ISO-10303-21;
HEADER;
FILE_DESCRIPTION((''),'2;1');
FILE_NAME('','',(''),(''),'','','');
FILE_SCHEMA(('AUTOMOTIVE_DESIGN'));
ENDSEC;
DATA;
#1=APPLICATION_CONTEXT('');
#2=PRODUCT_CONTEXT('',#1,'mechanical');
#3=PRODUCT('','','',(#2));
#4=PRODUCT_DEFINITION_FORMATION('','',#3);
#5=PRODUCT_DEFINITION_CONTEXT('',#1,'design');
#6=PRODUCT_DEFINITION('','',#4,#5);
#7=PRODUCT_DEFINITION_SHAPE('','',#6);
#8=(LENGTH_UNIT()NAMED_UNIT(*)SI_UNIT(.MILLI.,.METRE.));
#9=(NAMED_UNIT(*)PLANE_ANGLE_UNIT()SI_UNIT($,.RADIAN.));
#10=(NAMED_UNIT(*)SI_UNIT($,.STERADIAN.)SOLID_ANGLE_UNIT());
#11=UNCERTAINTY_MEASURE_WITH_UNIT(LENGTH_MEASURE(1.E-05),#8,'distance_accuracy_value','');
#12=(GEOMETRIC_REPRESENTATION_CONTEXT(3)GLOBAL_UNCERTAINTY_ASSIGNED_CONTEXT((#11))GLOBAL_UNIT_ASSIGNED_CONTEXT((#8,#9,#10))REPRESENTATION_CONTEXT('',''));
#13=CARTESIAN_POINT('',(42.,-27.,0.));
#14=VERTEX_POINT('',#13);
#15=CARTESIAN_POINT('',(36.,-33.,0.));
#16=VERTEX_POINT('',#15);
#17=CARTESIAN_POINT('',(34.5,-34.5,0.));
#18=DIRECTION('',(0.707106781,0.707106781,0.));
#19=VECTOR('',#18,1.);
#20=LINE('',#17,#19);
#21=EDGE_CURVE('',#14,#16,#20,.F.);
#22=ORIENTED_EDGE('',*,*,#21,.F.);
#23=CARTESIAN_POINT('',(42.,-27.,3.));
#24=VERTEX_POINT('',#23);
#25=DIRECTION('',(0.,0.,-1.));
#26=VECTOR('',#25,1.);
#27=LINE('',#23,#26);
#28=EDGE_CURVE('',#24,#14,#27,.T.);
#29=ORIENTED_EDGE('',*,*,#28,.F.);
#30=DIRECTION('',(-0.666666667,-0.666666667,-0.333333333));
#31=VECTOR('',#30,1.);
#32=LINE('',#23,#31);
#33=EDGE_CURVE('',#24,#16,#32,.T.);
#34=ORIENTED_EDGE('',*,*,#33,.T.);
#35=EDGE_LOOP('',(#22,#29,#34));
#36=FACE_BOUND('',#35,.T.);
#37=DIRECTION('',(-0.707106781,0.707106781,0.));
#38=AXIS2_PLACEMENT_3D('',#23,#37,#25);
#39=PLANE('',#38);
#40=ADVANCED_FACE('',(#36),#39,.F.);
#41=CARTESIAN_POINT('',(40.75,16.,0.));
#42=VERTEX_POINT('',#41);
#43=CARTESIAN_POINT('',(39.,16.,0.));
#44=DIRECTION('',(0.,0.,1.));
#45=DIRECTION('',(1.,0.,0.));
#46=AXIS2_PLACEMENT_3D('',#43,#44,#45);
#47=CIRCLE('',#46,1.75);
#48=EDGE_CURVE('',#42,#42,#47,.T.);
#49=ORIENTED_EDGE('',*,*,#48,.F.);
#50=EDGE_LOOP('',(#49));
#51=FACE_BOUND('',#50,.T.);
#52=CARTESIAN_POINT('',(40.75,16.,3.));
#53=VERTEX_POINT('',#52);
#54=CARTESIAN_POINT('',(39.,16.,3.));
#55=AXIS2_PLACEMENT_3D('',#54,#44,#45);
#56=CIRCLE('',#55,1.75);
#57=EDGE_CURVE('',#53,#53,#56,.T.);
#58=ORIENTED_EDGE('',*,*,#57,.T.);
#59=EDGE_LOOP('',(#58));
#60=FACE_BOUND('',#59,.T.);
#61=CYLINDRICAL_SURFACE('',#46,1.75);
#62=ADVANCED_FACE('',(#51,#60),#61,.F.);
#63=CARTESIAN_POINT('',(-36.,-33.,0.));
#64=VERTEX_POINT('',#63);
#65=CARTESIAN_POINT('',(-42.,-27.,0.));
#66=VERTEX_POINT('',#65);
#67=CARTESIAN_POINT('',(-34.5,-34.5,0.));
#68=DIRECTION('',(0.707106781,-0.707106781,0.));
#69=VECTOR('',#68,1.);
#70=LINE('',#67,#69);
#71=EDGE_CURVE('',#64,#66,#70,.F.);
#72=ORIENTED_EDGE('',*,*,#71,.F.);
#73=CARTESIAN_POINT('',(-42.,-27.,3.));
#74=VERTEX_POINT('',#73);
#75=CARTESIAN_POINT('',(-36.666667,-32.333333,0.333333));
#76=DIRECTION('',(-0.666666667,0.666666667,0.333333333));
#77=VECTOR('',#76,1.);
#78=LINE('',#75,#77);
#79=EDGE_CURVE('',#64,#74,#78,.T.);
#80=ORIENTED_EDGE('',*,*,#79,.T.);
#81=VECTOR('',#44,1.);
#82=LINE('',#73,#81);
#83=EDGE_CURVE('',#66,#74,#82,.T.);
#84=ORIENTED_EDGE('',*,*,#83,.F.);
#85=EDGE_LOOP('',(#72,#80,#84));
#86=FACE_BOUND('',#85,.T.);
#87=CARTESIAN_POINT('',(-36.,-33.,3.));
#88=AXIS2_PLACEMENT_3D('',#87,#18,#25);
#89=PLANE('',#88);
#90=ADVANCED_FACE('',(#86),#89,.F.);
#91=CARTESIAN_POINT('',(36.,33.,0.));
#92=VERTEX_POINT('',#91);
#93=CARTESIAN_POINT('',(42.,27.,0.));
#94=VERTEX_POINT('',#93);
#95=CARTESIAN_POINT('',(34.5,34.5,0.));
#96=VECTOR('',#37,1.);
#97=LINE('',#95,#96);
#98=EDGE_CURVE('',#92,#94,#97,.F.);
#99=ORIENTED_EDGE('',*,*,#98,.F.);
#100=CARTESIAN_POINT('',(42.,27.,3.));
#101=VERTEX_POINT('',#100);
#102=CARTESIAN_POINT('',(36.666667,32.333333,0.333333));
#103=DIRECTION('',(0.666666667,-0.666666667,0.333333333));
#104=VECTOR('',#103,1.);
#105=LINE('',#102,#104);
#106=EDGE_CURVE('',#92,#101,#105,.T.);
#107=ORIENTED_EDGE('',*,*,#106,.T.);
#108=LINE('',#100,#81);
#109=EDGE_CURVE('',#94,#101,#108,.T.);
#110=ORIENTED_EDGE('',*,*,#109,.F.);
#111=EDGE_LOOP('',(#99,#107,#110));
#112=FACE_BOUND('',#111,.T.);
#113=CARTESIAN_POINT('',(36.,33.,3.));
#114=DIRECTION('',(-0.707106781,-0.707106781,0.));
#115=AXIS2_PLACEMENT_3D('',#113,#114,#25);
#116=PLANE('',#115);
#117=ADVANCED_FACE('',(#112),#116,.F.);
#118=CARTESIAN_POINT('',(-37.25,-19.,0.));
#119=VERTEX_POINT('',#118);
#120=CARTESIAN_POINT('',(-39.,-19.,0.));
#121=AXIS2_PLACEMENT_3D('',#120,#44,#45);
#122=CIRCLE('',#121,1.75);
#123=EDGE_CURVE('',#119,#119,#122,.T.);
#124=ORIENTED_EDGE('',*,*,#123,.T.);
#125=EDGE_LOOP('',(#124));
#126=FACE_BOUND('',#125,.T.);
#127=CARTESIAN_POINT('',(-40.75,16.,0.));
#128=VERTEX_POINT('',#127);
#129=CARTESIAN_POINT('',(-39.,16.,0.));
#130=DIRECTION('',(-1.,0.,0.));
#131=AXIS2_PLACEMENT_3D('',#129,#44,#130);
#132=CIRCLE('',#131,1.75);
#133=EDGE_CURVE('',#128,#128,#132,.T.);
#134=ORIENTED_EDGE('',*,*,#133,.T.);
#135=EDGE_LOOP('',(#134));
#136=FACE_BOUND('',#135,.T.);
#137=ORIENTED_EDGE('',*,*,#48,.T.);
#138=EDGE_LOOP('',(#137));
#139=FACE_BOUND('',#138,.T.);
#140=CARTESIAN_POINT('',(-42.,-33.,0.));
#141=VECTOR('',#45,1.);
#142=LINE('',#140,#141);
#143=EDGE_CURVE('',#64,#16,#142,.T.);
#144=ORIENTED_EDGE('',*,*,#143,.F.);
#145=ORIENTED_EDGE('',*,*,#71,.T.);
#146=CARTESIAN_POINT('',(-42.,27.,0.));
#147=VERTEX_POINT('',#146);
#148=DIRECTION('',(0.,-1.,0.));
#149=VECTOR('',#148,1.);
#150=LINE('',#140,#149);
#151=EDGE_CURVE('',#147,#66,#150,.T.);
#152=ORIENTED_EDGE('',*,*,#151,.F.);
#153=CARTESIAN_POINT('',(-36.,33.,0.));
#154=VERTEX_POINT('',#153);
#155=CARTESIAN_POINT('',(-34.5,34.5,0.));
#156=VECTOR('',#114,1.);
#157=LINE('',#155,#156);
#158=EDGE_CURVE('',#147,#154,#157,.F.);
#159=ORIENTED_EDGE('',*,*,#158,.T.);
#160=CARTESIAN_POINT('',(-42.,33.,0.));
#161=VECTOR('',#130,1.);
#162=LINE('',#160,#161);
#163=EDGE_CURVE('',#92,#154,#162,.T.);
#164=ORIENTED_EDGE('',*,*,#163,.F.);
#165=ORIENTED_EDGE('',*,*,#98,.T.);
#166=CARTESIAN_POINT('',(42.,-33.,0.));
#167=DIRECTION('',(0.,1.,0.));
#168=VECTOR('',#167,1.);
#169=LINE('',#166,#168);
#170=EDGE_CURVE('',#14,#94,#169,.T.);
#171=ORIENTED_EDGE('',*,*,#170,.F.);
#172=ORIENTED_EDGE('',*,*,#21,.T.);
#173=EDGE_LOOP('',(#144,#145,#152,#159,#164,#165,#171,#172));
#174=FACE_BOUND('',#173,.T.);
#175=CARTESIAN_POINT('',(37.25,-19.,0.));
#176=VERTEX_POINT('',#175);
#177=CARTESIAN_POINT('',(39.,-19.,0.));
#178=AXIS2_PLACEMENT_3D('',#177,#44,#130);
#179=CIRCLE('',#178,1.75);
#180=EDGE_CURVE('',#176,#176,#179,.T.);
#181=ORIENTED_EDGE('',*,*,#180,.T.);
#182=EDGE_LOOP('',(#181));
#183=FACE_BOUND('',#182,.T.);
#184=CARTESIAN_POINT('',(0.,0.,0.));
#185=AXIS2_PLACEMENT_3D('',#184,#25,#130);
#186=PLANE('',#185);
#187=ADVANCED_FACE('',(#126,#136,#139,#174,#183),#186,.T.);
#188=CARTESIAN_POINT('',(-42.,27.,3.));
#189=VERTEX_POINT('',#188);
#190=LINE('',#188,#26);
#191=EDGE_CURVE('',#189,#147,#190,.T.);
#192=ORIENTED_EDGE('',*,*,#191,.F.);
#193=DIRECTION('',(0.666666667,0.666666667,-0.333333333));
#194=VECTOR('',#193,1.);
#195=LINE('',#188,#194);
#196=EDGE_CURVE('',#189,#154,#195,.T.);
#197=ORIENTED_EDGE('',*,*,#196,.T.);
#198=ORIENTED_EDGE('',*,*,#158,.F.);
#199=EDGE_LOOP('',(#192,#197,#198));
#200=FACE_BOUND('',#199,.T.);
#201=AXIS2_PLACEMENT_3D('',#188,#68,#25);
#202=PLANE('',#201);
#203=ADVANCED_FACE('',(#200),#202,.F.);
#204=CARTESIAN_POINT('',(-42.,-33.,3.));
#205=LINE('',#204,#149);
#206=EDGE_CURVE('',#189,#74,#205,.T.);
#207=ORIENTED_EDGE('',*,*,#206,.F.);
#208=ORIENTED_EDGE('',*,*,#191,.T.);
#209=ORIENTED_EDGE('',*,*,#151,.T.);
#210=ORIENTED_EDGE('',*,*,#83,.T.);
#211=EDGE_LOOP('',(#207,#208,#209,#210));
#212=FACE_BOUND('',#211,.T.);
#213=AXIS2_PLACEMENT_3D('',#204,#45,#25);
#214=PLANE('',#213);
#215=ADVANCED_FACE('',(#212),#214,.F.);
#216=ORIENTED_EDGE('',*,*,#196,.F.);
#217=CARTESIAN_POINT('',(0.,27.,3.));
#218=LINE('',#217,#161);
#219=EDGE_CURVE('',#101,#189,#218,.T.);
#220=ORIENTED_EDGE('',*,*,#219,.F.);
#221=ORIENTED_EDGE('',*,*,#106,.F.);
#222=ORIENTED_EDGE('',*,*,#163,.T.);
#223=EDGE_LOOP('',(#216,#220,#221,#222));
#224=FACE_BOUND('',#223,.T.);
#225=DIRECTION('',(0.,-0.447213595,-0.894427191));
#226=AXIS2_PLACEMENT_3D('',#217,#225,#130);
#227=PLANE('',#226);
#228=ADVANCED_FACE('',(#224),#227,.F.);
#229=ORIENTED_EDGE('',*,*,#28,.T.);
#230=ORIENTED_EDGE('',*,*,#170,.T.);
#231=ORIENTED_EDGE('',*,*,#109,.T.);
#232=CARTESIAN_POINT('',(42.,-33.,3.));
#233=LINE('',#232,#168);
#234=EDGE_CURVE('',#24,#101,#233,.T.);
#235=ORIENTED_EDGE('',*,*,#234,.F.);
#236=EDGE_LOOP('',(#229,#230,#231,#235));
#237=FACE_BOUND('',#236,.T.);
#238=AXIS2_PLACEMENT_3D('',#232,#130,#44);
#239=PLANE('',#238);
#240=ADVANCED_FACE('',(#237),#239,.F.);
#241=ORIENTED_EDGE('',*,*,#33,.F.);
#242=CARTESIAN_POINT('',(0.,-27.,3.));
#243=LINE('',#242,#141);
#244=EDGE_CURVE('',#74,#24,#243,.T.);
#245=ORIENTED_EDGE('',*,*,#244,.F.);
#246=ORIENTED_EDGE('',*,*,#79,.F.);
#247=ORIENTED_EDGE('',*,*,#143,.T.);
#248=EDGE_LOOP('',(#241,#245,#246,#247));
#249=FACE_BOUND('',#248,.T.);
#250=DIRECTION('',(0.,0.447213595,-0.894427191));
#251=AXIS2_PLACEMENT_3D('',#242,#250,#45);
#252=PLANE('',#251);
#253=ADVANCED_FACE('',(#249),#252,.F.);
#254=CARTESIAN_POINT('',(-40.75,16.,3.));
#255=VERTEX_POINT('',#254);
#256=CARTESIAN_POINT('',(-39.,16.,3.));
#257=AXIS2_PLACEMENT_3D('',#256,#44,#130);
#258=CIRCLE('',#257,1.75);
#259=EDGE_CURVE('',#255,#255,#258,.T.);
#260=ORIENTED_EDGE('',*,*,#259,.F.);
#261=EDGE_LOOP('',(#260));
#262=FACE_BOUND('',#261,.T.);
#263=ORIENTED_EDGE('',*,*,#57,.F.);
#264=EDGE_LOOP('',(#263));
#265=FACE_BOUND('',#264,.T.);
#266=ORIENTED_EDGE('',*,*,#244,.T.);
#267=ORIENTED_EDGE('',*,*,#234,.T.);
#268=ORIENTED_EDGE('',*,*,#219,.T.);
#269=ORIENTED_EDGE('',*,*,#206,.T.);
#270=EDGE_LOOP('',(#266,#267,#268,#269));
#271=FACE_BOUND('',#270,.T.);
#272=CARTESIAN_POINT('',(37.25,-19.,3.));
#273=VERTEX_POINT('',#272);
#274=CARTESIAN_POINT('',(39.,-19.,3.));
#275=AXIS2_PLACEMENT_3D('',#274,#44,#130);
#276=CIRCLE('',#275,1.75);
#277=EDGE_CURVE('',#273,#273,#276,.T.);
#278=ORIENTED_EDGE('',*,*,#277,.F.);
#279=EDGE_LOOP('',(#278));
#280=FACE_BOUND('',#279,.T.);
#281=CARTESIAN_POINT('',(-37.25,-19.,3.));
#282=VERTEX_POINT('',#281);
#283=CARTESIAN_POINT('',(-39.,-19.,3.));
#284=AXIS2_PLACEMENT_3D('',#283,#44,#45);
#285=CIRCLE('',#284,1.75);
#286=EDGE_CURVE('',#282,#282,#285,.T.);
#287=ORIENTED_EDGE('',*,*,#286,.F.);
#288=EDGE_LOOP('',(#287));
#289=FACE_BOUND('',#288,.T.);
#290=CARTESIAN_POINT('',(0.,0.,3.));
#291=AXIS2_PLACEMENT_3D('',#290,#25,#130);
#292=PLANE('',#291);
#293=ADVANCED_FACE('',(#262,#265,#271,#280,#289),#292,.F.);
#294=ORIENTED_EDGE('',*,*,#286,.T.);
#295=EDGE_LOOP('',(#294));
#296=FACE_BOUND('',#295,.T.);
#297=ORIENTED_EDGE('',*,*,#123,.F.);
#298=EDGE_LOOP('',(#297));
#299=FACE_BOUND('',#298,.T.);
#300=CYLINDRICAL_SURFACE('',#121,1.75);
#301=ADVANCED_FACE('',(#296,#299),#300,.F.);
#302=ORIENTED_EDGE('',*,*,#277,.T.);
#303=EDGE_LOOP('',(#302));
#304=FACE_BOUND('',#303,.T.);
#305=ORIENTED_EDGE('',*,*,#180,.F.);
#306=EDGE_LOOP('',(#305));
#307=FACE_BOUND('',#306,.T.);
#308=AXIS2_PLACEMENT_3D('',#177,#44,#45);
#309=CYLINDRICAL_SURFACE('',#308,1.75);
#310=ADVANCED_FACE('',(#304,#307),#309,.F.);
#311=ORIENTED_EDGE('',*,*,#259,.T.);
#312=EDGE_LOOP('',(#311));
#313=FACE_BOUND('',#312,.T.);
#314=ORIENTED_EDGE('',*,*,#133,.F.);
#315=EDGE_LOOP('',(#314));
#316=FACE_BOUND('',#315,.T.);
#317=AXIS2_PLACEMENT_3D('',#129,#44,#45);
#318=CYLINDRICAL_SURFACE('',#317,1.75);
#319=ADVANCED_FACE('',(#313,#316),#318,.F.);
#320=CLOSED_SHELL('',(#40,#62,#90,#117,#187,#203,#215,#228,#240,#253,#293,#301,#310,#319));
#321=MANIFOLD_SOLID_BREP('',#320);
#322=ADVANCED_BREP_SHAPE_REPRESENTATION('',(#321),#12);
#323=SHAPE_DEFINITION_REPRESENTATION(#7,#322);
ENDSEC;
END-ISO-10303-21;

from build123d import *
from OCP.BRepFilletAPI import BRepFilletAPI_MakeChamfer

# Parameters (mm, degrees)
SKETCH1_W           = 84
SKETCH1_H           = 66
BOSS_EXTRUDE1_DEPTH = 3
CHAMFER2_SIZE       = 6
CHAMFER4_SIZE       = 3
CHAMFER4_SIZE_2     = 6
SKETCH2_R           = 1.75
CUT_EXTRUDE1_DEPTH  = 54.4976635


with BuildPart() as part:
    # Sketch1 → Boss-Extrude1 (new body)
    with BuildSketch(Plane.XY):
        Rectangle(SKETCH1_W, SKETCH1_H)
    extrude(amount=BOSS_EXTRUDE1_DEPTH)

    # Chamfer2
    chamfer2_edges = [part.edges().sort_by_distance(p)[0] for p in [
        (42, -33, 1.5),
        (-42, -33, 1.5),
        (-42, 33, 1.5),
        (42, 33, 1.5),
    ]]
    chamfer(chamfer2_edges, length=CHAMFER2_SIZE)

    # Chamfer4
    chamfer4_edges_1 = [part.edges().sort_by_distance(p)[0] for p in [
        (0, -33, 3),
    ]]
    chamfer4_side_1 = [part.faces().sort_by_distance(p)[0] for p in [
        (0, -33, 2.94),
    ]]
    chamfer4_edges_2 = [part.edges().sort_by_distance(p)[0] for p in [
        (0, 33, 3),
    ]]
    chamfer4_side_2 = [part.faces().sort_by_distance(p)[0] for p in [
        (0, 32.94, 3),
    ]]
    chamfer4 = BRepFilletAPI_MakeChamfer(part.part.solid().wrapped)
    for e in chamfer4_edges_1:
        chamfer4.Add(CHAMFER4_SIZE - 0.0001, CHAMFER4_SIZE_2 - 0.0001, e.wrapped, chamfer4_side_1[0].wrapped)
    for e in chamfer4_edges_2:
        chamfer4.Add(CHAMFER4_SIZE_2 - 0.0001, CHAMFER4_SIZE - 0.0001, e.wrapped, chamfer4_side_2[0].wrapped)
    add(Compound.cast(chamfer4.Shape()), mode=Mode.REPLACE)  # a hair under: the kernel refuses the full size

    # Sketch2 → Cut-Extrude1 (cut, through all)
    with BuildSketch(Plane.XY.offset(3)):
        with Locations((-39, -19)):
            Circle(SKETCH2_R)
        with Locations(Location((39, -19, 0), (0, 0, 180))):
            Circle(SKETCH2_R)
        with Locations((39, 16)):
            Circle(SKETCH2_R)
        with Locations(Location((-39, 16, 0), (0, 0, 180))):
            Circle(SKETCH2_R)
    extrude(amount=-CUT_EXTRUDE1_DEPTH, mode=Mode.SUBTRACT)


solid = part.part
